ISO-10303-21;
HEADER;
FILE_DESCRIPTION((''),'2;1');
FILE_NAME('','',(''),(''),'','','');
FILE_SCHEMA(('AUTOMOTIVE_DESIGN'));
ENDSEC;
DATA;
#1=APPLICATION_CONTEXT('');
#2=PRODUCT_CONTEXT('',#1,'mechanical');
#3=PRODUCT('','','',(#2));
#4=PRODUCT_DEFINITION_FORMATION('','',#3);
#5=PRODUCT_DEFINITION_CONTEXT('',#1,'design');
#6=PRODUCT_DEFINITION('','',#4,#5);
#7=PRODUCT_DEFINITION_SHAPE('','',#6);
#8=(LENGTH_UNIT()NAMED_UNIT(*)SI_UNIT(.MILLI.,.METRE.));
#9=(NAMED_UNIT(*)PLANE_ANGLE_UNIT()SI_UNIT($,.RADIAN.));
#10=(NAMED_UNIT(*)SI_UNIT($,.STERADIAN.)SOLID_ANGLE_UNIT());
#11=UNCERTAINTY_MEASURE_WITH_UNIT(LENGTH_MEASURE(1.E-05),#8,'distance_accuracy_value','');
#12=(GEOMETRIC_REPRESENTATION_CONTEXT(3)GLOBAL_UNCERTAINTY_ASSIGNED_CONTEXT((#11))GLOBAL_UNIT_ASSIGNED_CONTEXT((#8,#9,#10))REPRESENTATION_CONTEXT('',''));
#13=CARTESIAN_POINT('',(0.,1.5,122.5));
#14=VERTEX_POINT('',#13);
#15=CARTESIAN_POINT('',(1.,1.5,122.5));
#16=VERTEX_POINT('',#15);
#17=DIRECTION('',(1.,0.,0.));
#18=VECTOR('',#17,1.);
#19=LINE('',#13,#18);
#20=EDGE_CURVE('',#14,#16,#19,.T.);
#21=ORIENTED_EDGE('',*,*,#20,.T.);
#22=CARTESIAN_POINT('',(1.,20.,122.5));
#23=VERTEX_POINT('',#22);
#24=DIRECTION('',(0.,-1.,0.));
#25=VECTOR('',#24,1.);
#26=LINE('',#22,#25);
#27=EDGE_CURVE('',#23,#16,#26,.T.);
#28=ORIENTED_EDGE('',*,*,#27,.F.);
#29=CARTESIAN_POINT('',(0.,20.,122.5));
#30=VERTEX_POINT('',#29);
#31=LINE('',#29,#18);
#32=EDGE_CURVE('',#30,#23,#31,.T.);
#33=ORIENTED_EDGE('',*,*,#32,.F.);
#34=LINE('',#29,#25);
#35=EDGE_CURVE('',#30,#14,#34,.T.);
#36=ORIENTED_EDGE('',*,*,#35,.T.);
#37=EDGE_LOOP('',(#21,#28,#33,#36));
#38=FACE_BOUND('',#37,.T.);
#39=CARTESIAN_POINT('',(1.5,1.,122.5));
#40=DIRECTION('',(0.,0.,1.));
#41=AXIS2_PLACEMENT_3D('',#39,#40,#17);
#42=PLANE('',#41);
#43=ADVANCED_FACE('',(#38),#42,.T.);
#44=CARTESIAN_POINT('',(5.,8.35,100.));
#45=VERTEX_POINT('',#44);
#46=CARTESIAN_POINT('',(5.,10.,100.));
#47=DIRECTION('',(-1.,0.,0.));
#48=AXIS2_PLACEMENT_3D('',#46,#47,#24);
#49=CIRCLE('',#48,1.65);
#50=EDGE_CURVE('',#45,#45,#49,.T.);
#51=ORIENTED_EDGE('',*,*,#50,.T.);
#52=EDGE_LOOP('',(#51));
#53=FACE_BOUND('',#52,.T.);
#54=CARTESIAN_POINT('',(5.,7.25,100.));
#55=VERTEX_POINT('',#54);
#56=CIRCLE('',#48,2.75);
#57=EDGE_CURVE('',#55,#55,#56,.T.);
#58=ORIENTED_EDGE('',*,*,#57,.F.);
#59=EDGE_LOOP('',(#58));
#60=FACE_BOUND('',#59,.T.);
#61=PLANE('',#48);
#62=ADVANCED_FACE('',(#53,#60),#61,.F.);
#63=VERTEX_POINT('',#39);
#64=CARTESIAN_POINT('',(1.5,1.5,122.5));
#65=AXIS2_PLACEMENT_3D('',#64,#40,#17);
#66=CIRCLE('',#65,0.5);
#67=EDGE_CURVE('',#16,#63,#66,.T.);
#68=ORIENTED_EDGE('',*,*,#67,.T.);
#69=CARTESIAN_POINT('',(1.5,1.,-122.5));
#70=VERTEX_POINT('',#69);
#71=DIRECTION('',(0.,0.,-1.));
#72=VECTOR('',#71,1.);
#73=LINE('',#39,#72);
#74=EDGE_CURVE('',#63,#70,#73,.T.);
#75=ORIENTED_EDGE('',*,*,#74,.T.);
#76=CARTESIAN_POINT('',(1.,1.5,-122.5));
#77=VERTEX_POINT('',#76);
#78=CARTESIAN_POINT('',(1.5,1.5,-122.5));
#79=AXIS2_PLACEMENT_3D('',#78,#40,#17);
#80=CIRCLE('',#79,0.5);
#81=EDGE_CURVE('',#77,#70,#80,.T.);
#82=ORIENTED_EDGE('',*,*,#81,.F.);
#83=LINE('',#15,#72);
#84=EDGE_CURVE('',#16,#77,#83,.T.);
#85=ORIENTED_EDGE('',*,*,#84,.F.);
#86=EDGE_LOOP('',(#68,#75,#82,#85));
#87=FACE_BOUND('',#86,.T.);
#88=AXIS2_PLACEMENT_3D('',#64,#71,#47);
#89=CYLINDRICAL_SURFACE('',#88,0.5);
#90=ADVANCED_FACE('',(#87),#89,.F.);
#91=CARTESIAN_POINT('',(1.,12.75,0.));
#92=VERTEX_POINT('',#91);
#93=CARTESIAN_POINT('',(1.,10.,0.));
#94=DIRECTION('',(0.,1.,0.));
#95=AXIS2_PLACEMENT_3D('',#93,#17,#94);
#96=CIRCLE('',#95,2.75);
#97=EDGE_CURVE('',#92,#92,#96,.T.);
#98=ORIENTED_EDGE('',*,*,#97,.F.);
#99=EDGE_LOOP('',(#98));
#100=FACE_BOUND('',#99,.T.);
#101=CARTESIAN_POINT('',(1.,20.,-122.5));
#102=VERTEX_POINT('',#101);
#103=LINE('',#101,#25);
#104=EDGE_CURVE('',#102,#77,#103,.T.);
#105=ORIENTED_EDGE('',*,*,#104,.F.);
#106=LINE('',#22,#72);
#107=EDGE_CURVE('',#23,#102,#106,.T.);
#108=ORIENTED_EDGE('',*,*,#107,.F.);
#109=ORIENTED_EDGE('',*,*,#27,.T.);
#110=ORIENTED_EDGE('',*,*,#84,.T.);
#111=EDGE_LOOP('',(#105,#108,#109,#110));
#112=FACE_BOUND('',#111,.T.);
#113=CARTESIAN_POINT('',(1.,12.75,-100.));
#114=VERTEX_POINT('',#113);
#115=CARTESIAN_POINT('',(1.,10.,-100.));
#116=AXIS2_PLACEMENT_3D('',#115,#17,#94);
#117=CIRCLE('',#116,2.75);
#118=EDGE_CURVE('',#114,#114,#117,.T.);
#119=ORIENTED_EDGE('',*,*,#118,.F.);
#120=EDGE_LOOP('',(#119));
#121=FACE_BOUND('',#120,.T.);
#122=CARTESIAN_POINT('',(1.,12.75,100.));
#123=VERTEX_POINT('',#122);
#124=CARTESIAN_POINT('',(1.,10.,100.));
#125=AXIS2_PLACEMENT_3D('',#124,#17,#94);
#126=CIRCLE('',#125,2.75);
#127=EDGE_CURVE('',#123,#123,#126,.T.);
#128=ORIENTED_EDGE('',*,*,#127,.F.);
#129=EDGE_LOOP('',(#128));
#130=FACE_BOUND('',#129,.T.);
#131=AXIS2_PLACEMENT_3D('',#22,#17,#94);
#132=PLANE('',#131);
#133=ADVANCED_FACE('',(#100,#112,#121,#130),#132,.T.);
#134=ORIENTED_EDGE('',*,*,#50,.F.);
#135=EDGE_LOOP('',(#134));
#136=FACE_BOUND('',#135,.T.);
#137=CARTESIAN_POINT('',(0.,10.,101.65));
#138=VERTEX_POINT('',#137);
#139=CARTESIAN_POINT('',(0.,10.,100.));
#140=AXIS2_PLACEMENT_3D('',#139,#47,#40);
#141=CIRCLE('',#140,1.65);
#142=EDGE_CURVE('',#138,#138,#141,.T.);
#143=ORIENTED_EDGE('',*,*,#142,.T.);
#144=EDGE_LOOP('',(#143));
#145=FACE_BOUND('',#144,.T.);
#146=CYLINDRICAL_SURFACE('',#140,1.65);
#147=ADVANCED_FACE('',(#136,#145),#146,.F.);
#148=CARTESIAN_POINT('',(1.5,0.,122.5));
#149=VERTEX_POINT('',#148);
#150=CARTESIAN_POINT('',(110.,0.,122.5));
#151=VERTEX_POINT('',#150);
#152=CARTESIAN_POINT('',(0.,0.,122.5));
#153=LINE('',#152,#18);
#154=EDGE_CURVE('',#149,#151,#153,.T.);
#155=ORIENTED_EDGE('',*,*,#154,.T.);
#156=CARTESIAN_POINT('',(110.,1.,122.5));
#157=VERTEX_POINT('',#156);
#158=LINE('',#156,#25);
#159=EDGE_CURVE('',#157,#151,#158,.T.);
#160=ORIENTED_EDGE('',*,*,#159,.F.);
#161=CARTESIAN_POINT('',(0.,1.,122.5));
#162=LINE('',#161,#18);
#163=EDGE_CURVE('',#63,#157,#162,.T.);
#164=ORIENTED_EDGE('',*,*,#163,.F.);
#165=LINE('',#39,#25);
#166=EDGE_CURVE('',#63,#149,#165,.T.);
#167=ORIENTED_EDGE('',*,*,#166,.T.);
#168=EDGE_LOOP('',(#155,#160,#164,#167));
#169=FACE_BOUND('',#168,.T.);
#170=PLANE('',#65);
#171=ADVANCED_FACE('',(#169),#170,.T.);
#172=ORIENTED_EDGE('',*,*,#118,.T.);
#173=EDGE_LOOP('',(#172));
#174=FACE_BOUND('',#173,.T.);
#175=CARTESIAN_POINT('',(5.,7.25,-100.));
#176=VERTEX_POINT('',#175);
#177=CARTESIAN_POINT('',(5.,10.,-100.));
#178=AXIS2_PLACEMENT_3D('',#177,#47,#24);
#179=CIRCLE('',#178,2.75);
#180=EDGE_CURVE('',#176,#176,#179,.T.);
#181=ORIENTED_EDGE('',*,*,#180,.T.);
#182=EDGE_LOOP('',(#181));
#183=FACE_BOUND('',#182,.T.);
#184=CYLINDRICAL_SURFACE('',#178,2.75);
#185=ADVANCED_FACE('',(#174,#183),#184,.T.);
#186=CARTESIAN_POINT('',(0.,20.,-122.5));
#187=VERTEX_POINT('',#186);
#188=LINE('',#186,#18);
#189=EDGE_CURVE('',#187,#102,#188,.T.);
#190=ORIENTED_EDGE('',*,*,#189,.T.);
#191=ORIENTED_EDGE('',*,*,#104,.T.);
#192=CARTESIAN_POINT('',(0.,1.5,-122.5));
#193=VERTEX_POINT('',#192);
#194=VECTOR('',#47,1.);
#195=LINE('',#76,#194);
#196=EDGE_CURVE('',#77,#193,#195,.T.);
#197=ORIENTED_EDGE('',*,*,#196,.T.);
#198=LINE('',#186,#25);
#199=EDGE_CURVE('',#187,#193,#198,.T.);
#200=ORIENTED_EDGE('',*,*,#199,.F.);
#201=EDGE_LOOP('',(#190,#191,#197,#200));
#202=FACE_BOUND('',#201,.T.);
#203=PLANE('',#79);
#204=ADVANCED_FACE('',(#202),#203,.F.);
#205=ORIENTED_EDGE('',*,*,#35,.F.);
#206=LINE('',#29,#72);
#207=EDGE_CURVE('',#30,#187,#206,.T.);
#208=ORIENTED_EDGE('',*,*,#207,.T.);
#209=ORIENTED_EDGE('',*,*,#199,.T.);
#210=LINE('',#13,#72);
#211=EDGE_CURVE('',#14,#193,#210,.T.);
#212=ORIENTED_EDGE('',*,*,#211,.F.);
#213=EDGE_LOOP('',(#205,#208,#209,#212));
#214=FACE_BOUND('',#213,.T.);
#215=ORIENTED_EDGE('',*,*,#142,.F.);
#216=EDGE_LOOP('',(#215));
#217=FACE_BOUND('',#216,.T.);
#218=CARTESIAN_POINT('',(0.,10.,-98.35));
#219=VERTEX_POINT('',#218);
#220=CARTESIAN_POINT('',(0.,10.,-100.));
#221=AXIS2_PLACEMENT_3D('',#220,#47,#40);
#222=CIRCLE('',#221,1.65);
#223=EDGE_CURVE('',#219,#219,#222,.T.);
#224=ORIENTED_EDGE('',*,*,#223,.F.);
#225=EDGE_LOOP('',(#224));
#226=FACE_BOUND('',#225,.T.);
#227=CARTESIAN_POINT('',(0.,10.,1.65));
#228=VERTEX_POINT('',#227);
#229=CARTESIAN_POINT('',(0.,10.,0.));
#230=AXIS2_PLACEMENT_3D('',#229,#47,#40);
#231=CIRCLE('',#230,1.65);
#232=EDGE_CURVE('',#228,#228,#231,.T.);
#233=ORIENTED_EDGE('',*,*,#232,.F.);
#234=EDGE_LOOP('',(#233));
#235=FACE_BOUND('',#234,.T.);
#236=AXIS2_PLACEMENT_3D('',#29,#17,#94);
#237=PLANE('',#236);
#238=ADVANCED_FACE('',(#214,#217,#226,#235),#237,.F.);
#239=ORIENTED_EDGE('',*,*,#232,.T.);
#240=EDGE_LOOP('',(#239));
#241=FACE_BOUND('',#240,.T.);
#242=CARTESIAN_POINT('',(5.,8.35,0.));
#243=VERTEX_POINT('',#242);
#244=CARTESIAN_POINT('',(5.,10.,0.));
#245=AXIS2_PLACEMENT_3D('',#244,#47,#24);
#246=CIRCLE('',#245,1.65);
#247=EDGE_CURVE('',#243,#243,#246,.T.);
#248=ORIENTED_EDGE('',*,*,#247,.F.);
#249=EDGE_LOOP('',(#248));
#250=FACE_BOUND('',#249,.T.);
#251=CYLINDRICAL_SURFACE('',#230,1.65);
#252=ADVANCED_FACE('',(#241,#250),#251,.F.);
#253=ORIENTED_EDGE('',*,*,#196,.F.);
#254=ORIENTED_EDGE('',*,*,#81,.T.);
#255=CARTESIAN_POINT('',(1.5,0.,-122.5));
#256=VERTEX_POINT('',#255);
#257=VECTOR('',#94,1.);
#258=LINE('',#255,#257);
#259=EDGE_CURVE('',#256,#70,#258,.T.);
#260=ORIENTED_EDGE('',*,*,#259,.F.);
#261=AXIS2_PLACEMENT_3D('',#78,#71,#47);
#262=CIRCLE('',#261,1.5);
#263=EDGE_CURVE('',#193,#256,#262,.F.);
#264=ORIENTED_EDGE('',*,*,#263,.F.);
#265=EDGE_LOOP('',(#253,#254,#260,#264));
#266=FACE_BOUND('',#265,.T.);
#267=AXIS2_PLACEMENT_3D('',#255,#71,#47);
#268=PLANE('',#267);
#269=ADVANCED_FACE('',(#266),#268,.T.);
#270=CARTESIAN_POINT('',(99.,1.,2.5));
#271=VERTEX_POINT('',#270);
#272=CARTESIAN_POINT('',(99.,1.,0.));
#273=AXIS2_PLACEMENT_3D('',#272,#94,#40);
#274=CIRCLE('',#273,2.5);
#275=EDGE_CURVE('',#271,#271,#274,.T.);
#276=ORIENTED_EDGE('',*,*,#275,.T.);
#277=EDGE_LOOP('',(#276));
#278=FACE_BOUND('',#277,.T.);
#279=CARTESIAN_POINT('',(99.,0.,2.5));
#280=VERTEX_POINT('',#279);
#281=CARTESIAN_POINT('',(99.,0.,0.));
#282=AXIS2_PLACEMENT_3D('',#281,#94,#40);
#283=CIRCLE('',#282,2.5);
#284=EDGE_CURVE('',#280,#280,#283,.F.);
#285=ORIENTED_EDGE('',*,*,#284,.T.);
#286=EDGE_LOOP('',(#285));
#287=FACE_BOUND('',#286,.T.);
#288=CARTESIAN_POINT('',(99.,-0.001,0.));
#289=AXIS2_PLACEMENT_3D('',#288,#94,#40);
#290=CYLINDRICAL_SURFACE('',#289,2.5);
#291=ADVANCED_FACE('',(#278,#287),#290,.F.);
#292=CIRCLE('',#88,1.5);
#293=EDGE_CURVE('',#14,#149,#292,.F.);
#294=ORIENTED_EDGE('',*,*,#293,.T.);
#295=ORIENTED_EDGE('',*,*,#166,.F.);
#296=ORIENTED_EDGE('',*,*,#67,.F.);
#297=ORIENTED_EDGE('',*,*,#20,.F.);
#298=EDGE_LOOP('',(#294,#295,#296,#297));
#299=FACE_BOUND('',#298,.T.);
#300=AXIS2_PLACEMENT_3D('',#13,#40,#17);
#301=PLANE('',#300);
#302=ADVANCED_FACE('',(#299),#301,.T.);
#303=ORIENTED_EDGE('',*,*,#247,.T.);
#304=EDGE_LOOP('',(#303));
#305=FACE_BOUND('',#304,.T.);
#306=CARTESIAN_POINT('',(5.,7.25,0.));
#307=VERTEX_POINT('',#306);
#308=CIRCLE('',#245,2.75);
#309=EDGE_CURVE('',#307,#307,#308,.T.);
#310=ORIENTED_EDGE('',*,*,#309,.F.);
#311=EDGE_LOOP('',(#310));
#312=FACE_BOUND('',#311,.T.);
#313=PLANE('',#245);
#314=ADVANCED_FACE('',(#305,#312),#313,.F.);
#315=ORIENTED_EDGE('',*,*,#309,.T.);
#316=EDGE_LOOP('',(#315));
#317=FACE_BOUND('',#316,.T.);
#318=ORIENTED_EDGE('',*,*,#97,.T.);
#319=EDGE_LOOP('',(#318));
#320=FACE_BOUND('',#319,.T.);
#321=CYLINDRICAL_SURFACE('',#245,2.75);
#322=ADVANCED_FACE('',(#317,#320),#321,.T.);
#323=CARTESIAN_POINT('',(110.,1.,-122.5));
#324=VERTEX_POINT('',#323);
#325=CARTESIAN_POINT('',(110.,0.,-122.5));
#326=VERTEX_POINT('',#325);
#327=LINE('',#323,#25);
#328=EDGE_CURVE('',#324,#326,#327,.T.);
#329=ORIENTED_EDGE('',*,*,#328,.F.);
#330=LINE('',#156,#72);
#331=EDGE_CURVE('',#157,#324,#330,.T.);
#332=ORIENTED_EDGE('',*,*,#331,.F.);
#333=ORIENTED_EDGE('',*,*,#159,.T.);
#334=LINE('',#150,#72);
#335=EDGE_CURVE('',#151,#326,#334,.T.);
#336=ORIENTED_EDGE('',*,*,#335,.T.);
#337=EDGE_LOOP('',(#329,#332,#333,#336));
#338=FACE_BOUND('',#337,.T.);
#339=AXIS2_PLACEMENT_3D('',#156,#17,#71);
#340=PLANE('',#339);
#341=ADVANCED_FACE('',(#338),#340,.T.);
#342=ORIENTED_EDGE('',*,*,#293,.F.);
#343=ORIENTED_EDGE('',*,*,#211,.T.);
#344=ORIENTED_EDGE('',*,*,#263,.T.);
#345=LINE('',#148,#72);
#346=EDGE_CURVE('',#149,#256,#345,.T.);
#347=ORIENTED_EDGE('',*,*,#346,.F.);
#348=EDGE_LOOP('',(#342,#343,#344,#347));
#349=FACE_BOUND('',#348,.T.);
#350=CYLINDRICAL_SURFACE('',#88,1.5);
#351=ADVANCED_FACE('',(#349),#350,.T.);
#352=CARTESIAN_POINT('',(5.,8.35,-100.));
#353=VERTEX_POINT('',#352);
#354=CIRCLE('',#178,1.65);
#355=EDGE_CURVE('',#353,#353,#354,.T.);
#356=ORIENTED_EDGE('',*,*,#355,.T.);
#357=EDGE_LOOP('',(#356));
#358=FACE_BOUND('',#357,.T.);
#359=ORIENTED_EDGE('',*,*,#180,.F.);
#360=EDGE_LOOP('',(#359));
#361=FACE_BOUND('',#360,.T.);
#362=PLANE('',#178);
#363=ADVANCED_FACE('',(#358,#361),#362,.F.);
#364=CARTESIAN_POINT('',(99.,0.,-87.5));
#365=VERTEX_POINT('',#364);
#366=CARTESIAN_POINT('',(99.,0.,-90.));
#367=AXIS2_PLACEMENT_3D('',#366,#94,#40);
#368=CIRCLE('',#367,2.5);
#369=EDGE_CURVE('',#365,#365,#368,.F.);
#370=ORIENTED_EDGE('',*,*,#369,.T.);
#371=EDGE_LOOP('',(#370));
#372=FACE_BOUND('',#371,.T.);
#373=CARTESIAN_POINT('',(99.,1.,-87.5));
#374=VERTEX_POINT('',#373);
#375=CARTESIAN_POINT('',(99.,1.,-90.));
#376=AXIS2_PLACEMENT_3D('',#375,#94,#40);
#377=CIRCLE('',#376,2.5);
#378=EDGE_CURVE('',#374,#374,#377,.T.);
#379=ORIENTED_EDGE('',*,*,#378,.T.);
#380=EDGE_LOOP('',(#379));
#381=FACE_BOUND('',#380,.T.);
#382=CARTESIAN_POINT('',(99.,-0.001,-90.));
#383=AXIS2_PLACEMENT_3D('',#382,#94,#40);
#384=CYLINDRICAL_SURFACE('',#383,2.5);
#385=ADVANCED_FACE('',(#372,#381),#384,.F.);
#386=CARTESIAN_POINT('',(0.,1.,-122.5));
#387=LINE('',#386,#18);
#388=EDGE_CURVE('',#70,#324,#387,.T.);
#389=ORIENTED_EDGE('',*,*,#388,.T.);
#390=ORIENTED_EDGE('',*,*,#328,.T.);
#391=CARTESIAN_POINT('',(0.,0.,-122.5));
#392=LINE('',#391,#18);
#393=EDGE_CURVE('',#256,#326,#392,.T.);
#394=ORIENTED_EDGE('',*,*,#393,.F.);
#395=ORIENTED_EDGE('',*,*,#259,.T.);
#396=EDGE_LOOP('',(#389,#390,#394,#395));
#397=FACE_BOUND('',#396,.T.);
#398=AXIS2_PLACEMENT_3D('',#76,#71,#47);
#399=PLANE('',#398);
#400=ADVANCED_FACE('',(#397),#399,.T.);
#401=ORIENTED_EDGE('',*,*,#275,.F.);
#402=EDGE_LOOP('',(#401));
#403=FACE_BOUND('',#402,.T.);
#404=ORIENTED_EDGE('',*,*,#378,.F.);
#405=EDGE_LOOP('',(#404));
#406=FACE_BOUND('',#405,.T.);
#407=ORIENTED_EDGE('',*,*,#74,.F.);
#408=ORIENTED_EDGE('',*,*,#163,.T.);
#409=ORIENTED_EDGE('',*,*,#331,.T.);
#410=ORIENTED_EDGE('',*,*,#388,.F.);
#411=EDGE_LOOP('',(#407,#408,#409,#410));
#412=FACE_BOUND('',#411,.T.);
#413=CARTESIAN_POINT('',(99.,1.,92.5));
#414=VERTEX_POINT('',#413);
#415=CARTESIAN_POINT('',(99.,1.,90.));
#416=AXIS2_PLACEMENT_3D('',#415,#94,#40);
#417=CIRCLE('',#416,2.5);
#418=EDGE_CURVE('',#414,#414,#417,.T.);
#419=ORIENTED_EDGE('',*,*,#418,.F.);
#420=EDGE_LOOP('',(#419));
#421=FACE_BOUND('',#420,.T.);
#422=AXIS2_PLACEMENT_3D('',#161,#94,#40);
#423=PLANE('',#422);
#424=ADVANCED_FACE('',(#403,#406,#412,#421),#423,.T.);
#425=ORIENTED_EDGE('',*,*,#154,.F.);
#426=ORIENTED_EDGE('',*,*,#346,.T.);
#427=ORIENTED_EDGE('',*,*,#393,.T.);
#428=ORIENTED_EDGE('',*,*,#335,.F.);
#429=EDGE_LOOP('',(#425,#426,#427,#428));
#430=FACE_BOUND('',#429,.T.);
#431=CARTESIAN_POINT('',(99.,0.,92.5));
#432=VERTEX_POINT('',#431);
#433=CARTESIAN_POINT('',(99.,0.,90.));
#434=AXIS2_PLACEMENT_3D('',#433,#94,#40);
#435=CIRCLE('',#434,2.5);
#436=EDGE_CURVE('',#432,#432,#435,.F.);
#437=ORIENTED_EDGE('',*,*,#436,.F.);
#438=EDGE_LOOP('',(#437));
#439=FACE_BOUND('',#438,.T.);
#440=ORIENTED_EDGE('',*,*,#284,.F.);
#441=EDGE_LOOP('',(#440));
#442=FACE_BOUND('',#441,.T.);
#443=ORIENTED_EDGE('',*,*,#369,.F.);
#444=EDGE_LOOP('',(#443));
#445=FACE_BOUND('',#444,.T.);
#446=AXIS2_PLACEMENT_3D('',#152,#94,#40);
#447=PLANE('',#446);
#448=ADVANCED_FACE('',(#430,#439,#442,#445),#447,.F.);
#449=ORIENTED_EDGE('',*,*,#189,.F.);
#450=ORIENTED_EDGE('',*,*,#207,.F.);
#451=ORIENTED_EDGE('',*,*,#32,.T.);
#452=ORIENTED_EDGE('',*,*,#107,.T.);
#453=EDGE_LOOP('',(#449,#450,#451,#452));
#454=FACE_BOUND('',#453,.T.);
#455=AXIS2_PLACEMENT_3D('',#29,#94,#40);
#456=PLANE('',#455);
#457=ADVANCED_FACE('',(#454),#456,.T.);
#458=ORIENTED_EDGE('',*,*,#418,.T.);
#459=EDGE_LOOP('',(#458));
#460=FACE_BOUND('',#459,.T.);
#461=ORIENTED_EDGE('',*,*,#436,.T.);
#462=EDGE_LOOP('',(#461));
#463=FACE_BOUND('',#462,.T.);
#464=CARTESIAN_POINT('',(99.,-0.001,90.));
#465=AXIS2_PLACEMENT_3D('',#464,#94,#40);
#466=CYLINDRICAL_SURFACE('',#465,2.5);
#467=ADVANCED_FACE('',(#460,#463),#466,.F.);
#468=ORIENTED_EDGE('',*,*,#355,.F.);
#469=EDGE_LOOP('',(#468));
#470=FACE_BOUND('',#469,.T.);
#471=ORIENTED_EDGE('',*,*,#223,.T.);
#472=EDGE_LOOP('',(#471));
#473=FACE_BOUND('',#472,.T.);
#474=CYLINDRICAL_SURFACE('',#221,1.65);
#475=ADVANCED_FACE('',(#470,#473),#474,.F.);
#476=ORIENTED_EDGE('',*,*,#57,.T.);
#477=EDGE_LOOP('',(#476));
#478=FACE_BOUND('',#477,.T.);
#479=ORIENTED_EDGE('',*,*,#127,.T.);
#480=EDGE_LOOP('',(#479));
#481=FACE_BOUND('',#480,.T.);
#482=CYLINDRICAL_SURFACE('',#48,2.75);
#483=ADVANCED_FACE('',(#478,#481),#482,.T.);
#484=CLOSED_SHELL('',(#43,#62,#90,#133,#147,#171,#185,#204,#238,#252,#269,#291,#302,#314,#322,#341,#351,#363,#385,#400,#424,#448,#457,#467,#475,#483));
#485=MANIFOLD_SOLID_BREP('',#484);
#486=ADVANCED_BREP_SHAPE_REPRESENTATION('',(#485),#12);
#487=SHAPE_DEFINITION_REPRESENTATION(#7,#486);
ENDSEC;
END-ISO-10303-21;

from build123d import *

# Parameters (mm, degrees)
SM_BASE_FLANGE_1_DEPTH = 122.5
CUT_EXTRUDE_1_REACH    = 167.732
SKETCH_4_R             = 2.5
SKETCH_7_R             = 2.75
EXTRUDE_1_DEPTH        = 5
HOLE_WIZARD_M4_1_D     = 3.3
HOLE_WIZARD_M4_1_DEPTH = 10.1
HOLE_WIZARD_M4_1_TIP   = 0.991420021


# Sheet-metal steps are written as plain solids
with BuildPart() as part:
    # Sketch 1 → 基体-法兰1 (new, symmetric)
    with BuildSketch(Plane.XY):
        with BuildLine():
            Line((0, 20), (0, 1.5))
            ThreePointArc((0, 1.5), (0.439339828, 0.439339828), (1.5, 0))
            Line((1.5, 0), (110, 0))
            Line((110, 0), (110, 1))
            Line((110, 1), (1.5, 1))
            ThreePointArc((1.5, 1), (1.146446609, 1.146446609), (1, 1.5))
            Line((1, 1.5), (1, 20))
            Line((1, 20), (0, 20))
        make_face()
    extrude(amount=SM_BASE_FLANGE_1_DEPTH, both=True)

    # 草图4 → 切除-拉伸1 (cut, up to next)
    with BuildSketch(Plane(origin=(0, 1, 0), x_dir=(1, 0, 0), z_dir=(0, 1, 0)), mode=Mode.PRIVATE) as cut_extrude_1_sk1:
        with Locations(Location((99, 0, 0), (0, 0, 270))):
            Circle(SKETCH_4_R)
    cut_extrude_1_tool1 = extrude(cut_extrude_1_sk1.sketch, amount=-CUT_EXTRUDE_1_REACH, mode=Mode.PRIVATE) & part.part
    # 草图4 → 切除-拉伸1 (cut, up to next)
    with BuildSketch(Plane(origin=(0, 1, 0), x_dir=(1, 0, 0), z_dir=(0, 1, 0)), mode=Mode.PRIVATE) as cut_extrude_1_sk2:
        with Locations(Location((99, 90, 0), (0, 0, 270))):
            Circle(SKETCH_4_R)
    cut_extrude_1_tool2 = extrude(cut_extrude_1_sk2.sketch, amount=-CUT_EXTRUDE_1_REACH, mode=Mode.PRIVATE) & part.part
    # 草图4 → 切除-拉伸1 (cut, up to next)
    with BuildSketch(Plane(origin=(0, 1, 0), x_dir=(1, 0, 0), z_dir=(0, 1, 0)), mode=Mode.PRIVATE) as cut_extrude_1_sk3:
        with Locations(Location((99, -90, 0), (0, 0, 270))):
            Circle(SKETCH_4_R)
    cut_extrude_1_tool3 = extrude(cut_extrude_1_sk3.sketch, amount=-CUT_EXTRUDE_1_REACH, mode=Mode.PRIVATE) & part.part
    add(cut_extrude_1_tool1.solids().sort_by_distance((99, 1, 0))[0], mode=Mode.SUBTRACT)
    add(cut_extrude_1_tool2.solids().sort_by_distance((99, 1, -90))[0], mode=Mode.SUBTRACT)
    add(cut_extrude_1_tool3.solids().sort_by_distance((99, 1, 90))[0], mode=Mode.SUBTRACT)

    # 草图7 → 凸台-拉伸1 (add)
    with BuildSketch(Plane.ZY):
        with Locations(Location((0, 10, 0), (0, 0, 270))):
            Circle(SKETCH_7_R)
        with Locations(Location((-100, 10, 0), (0, 0, 270))):
            Circle(SKETCH_7_R)
        with Locations(Location((100, 10, 0), (0, 0, 270))):
            Circle(SKETCH_7_R)
    extrude(amount=-EXTRUDE_1_DEPTH)

    # M4 螺纹孔1
    with Locations(Plane.ZY):
        with Locations((100, 10), (0, 10), (-100, 10)):
            Hole(HOLE_WIZARD_M4_1_D / 2, depth=HOLE_WIZARD_M4_1_DEPTH)
            with Locations((0, 0, -(HOLE_WIZARD_M4_1_DEPTH + HOLE_WIZARD_M4_1_TIP / 2))):  # 118° drill point
                Cone(0, HOLE_WIZARD_M4_1_D / 2, HOLE_WIZARD_M4_1_TIP, mode=Mode.SUBTRACT)


solid = part.part
